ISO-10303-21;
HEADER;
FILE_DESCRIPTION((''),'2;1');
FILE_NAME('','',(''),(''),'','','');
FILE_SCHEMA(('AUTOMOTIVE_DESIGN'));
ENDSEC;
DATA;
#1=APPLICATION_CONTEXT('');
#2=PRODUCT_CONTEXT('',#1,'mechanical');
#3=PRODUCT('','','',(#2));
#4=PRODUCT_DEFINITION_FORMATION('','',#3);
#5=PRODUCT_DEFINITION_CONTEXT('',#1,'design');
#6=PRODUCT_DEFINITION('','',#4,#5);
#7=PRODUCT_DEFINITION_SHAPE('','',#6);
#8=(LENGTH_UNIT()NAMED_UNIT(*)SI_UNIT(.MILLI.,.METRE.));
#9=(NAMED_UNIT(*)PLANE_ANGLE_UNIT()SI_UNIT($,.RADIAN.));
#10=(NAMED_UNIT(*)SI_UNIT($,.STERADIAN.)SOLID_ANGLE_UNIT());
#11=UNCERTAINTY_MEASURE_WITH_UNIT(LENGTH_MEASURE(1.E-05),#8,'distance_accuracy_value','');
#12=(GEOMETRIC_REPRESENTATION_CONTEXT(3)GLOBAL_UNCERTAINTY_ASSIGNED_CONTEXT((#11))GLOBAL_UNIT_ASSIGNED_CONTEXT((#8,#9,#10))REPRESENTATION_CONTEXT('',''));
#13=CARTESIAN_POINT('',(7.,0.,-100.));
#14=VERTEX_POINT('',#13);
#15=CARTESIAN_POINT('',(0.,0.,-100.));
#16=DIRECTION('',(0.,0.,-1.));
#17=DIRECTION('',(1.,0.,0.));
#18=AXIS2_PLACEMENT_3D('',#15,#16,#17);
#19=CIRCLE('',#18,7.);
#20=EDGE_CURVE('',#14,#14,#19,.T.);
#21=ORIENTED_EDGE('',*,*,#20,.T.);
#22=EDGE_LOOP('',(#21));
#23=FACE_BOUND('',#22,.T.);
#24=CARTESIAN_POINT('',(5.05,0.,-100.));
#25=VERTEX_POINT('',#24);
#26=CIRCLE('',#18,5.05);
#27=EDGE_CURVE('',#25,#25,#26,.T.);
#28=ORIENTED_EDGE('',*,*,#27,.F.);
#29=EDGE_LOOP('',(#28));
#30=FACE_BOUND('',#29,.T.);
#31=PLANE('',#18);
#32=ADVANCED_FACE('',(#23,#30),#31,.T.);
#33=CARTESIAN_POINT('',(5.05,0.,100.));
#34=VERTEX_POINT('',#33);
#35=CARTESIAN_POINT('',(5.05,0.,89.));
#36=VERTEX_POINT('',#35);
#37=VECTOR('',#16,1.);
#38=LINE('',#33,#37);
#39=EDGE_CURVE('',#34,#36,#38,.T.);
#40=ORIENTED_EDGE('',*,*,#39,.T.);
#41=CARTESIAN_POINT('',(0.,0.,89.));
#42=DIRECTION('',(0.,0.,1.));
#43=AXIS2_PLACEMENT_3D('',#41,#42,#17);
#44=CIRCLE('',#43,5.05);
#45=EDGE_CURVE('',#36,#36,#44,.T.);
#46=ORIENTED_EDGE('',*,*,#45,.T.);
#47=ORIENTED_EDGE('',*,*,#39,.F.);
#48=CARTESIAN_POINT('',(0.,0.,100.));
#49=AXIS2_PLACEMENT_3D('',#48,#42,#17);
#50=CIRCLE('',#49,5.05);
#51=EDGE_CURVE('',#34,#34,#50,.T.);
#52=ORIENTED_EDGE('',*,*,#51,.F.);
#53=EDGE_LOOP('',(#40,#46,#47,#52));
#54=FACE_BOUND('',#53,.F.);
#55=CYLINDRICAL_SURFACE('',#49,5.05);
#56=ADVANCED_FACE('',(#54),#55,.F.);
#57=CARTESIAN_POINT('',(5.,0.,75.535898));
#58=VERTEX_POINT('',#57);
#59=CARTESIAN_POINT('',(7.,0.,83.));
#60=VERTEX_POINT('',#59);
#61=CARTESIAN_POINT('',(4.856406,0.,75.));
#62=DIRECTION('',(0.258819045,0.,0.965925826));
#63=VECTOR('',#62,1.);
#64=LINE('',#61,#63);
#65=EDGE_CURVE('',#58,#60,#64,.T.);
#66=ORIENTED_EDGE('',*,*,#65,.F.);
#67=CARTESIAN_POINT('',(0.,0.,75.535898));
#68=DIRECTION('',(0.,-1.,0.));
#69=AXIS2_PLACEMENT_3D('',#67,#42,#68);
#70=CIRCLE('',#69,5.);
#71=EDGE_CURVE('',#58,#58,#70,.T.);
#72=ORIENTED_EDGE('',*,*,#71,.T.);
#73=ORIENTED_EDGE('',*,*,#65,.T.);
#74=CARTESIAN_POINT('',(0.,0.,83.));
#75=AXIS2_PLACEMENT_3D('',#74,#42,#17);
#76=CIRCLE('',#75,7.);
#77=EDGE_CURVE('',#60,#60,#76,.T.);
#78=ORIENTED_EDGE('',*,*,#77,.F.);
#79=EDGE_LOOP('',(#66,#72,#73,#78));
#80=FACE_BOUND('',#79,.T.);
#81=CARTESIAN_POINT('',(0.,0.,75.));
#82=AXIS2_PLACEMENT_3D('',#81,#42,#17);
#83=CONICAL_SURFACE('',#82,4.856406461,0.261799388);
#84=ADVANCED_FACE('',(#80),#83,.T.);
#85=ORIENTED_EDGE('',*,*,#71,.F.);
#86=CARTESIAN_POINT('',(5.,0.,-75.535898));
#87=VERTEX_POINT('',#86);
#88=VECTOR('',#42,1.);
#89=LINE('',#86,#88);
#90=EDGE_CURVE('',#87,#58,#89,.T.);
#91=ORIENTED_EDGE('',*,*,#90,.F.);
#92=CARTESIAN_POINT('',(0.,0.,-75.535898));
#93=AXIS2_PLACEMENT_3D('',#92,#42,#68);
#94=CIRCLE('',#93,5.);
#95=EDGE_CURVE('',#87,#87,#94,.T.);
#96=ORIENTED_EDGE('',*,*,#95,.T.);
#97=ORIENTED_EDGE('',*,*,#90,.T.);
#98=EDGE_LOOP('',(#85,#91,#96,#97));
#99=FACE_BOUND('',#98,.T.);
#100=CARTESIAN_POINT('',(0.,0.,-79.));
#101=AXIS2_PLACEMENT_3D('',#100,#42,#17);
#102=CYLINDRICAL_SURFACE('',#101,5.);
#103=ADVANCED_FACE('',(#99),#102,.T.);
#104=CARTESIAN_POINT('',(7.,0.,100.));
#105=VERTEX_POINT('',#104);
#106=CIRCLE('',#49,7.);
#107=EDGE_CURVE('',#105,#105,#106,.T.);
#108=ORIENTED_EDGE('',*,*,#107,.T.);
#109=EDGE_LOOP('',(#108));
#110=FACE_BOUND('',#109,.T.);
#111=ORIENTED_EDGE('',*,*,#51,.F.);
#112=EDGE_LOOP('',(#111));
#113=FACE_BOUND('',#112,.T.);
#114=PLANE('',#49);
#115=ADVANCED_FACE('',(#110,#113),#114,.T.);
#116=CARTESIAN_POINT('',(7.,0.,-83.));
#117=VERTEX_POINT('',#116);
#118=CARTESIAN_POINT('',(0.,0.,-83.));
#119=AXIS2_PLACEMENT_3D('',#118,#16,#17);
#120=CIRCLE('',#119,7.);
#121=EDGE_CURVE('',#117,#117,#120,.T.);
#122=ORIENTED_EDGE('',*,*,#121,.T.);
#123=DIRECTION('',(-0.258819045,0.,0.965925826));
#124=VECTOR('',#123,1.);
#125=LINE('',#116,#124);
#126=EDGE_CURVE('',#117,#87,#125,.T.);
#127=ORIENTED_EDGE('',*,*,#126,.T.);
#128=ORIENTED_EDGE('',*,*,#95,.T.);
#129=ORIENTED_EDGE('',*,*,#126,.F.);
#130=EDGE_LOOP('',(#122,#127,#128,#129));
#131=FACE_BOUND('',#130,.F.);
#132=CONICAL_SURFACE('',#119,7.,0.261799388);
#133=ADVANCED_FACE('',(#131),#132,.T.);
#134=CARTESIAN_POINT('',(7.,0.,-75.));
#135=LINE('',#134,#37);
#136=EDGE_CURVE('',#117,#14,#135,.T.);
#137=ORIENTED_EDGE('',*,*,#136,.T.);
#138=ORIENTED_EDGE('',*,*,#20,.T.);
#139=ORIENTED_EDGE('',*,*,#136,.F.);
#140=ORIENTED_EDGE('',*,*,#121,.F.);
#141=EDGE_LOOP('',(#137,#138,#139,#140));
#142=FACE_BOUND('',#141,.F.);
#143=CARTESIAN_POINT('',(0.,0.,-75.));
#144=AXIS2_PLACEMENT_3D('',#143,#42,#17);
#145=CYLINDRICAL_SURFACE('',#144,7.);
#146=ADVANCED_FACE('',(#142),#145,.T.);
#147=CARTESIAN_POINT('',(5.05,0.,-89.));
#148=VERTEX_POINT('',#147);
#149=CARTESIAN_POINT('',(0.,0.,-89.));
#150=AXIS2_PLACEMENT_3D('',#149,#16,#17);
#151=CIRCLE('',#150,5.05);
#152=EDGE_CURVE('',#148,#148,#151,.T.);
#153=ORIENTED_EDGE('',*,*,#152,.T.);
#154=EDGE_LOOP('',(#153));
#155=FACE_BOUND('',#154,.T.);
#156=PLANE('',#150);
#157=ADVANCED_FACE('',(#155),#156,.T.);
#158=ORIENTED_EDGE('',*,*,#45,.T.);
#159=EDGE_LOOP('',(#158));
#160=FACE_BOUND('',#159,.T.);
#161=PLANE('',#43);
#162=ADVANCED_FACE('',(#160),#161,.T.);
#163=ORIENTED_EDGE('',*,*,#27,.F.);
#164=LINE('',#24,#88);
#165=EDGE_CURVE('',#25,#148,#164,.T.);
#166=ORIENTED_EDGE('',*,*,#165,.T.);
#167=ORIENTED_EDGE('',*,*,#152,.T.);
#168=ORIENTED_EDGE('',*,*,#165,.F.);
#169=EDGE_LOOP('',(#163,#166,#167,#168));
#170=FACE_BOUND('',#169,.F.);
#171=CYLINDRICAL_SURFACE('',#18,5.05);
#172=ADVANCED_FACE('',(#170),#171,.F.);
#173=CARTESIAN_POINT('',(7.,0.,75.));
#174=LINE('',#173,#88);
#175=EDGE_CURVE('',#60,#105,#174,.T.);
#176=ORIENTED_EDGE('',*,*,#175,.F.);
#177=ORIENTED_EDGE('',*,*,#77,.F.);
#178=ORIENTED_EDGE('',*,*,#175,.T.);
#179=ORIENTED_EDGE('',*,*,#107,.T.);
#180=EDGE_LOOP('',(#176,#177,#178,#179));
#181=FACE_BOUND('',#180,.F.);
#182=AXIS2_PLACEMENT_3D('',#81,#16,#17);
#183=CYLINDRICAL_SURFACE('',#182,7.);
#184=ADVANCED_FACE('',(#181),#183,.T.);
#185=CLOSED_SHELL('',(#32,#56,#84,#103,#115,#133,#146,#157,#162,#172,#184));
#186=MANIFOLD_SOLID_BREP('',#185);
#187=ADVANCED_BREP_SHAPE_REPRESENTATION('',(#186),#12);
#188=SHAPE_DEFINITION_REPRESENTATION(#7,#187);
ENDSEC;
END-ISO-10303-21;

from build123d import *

# Parameters (mm, degrees)
F0_R         = 5
F1_DEPTH     = 75
F2_R         = 7
F2_R_2       = 5
F4_DEPTH     = 25
F3_R         = 7
F3_R_2       = 5
F5_DEPTH     = 25
F6_S5_R      = 5
F6_T6_DEPTH  = 12
F6_S11_R     = 5
F6_T12_DEPTH = 12
F7_R         = 5.05
F8_DEPTH     = 11
F9_R         = 5.05
F10_DEPTH    = 11


# Not quite as in the source:
# - a fillet or chamfer that OpenCascade refuses, or shapes differently, is made with other operations: its cross-section is extruded or revolved along the edge and cut away or added


with BuildPart() as f1:
    # F0 (on Top) → F1 (new body, symmetric)
    with BuildSketch(Plane.XY):
        Circle(F0_R)
    extrude(amount=F1_DEPTH, both=True)

    # F2 (on face) → F4 (join)
    with BuildSketch(Plane.XY.offset(75)):
        Circle(F2_R)
        Circle(F2_R_2, mode=Mode.SUBTRACT)
        Circle(F2_R_2)
    extrude(amount=F4_DEPTH)

    # F3 (on face) → F5 (join)
    with BuildSketch(Plane(origin=(0, 0, -75), x_dir=(1, 0, 0), z_dir=(0, 0, -1))):
        Circle(F3_R)
        Circle(F3_R_2, mode=Mode.SUBTRACT)
        Circle(F3_R_2)
    extrude(amount=F5_DEPTH)

    # F6: chamfer of 8 x 2.1435935394 on 2 edges, made by hand


with BuildPart() as f6_tool2:
    # F6_s3 → F6_t4 (revolve)
    with BuildSketch(Plane.XZ):
        Polygon((7, -83), (4.8564064606, -75), (7, -75), align=None)
    revolve(axis=Axis((0, 0, -75), (0, 0, -1)))

    # F6_s5 → F6_t6 (cut, symmetric)
    with BuildSketch(Plane.XY.offset(-79)):
        Circle(F6_S5_R)
    extrude(amount=F6_T6_DEPTH, both=True, mode=Mode.SUBTRACT)


with BuildPart() as f1_1:
    add(f1.part)

    # F6_t1: cut F6_tool2
    add(f6_tool2.part, mode=Mode.SUBTRACT)


with BuildPart() as f6_tool8:
    # F6_s9 → F6_t10 (revolve)
    with BuildSketch(Plane.XZ):
        Polygon((4.8564064606, 75), (7, 83), (7, 75), align=None)
    revolve(axis=Axis((0, 0, 75), (0, 0, 1)))

    # F6_s11 → F6_t12 (cut, symmetric)
    with BuildSketch(Plane.XY.offset(79)):
        Circle(F6_S11_R)
    extrude(amount=F6_T12_DEPTH, both=True, mode=Mode.SUBTRACT)


with BuildPart() as f1_2:
    add(f1_1.part)

    # F6_t7: cut F6_tool8
    add(f6_tool8.part, mode=Mode.SUBTRACT)

    # F7 (on face) → F8 (cut)
    with BuildSketch(Plane(origin=(0, 0, -100), x_dir=(1, 0, 0), z_dir=(0, 0, -1))):
        Circle(F7_R)
    extrude(amount=-F8_DEPTH, mode=Mode.SUBTRACT)

    # F9 (on face) → F10 (cut)
    with BuildSketch(Plane.XY.offset(100)):
        Circle(F9_R)
    extrude(amount=-F10_DEPTH, mode=Mode.SUBTRACT)


solid = f1_2.part
